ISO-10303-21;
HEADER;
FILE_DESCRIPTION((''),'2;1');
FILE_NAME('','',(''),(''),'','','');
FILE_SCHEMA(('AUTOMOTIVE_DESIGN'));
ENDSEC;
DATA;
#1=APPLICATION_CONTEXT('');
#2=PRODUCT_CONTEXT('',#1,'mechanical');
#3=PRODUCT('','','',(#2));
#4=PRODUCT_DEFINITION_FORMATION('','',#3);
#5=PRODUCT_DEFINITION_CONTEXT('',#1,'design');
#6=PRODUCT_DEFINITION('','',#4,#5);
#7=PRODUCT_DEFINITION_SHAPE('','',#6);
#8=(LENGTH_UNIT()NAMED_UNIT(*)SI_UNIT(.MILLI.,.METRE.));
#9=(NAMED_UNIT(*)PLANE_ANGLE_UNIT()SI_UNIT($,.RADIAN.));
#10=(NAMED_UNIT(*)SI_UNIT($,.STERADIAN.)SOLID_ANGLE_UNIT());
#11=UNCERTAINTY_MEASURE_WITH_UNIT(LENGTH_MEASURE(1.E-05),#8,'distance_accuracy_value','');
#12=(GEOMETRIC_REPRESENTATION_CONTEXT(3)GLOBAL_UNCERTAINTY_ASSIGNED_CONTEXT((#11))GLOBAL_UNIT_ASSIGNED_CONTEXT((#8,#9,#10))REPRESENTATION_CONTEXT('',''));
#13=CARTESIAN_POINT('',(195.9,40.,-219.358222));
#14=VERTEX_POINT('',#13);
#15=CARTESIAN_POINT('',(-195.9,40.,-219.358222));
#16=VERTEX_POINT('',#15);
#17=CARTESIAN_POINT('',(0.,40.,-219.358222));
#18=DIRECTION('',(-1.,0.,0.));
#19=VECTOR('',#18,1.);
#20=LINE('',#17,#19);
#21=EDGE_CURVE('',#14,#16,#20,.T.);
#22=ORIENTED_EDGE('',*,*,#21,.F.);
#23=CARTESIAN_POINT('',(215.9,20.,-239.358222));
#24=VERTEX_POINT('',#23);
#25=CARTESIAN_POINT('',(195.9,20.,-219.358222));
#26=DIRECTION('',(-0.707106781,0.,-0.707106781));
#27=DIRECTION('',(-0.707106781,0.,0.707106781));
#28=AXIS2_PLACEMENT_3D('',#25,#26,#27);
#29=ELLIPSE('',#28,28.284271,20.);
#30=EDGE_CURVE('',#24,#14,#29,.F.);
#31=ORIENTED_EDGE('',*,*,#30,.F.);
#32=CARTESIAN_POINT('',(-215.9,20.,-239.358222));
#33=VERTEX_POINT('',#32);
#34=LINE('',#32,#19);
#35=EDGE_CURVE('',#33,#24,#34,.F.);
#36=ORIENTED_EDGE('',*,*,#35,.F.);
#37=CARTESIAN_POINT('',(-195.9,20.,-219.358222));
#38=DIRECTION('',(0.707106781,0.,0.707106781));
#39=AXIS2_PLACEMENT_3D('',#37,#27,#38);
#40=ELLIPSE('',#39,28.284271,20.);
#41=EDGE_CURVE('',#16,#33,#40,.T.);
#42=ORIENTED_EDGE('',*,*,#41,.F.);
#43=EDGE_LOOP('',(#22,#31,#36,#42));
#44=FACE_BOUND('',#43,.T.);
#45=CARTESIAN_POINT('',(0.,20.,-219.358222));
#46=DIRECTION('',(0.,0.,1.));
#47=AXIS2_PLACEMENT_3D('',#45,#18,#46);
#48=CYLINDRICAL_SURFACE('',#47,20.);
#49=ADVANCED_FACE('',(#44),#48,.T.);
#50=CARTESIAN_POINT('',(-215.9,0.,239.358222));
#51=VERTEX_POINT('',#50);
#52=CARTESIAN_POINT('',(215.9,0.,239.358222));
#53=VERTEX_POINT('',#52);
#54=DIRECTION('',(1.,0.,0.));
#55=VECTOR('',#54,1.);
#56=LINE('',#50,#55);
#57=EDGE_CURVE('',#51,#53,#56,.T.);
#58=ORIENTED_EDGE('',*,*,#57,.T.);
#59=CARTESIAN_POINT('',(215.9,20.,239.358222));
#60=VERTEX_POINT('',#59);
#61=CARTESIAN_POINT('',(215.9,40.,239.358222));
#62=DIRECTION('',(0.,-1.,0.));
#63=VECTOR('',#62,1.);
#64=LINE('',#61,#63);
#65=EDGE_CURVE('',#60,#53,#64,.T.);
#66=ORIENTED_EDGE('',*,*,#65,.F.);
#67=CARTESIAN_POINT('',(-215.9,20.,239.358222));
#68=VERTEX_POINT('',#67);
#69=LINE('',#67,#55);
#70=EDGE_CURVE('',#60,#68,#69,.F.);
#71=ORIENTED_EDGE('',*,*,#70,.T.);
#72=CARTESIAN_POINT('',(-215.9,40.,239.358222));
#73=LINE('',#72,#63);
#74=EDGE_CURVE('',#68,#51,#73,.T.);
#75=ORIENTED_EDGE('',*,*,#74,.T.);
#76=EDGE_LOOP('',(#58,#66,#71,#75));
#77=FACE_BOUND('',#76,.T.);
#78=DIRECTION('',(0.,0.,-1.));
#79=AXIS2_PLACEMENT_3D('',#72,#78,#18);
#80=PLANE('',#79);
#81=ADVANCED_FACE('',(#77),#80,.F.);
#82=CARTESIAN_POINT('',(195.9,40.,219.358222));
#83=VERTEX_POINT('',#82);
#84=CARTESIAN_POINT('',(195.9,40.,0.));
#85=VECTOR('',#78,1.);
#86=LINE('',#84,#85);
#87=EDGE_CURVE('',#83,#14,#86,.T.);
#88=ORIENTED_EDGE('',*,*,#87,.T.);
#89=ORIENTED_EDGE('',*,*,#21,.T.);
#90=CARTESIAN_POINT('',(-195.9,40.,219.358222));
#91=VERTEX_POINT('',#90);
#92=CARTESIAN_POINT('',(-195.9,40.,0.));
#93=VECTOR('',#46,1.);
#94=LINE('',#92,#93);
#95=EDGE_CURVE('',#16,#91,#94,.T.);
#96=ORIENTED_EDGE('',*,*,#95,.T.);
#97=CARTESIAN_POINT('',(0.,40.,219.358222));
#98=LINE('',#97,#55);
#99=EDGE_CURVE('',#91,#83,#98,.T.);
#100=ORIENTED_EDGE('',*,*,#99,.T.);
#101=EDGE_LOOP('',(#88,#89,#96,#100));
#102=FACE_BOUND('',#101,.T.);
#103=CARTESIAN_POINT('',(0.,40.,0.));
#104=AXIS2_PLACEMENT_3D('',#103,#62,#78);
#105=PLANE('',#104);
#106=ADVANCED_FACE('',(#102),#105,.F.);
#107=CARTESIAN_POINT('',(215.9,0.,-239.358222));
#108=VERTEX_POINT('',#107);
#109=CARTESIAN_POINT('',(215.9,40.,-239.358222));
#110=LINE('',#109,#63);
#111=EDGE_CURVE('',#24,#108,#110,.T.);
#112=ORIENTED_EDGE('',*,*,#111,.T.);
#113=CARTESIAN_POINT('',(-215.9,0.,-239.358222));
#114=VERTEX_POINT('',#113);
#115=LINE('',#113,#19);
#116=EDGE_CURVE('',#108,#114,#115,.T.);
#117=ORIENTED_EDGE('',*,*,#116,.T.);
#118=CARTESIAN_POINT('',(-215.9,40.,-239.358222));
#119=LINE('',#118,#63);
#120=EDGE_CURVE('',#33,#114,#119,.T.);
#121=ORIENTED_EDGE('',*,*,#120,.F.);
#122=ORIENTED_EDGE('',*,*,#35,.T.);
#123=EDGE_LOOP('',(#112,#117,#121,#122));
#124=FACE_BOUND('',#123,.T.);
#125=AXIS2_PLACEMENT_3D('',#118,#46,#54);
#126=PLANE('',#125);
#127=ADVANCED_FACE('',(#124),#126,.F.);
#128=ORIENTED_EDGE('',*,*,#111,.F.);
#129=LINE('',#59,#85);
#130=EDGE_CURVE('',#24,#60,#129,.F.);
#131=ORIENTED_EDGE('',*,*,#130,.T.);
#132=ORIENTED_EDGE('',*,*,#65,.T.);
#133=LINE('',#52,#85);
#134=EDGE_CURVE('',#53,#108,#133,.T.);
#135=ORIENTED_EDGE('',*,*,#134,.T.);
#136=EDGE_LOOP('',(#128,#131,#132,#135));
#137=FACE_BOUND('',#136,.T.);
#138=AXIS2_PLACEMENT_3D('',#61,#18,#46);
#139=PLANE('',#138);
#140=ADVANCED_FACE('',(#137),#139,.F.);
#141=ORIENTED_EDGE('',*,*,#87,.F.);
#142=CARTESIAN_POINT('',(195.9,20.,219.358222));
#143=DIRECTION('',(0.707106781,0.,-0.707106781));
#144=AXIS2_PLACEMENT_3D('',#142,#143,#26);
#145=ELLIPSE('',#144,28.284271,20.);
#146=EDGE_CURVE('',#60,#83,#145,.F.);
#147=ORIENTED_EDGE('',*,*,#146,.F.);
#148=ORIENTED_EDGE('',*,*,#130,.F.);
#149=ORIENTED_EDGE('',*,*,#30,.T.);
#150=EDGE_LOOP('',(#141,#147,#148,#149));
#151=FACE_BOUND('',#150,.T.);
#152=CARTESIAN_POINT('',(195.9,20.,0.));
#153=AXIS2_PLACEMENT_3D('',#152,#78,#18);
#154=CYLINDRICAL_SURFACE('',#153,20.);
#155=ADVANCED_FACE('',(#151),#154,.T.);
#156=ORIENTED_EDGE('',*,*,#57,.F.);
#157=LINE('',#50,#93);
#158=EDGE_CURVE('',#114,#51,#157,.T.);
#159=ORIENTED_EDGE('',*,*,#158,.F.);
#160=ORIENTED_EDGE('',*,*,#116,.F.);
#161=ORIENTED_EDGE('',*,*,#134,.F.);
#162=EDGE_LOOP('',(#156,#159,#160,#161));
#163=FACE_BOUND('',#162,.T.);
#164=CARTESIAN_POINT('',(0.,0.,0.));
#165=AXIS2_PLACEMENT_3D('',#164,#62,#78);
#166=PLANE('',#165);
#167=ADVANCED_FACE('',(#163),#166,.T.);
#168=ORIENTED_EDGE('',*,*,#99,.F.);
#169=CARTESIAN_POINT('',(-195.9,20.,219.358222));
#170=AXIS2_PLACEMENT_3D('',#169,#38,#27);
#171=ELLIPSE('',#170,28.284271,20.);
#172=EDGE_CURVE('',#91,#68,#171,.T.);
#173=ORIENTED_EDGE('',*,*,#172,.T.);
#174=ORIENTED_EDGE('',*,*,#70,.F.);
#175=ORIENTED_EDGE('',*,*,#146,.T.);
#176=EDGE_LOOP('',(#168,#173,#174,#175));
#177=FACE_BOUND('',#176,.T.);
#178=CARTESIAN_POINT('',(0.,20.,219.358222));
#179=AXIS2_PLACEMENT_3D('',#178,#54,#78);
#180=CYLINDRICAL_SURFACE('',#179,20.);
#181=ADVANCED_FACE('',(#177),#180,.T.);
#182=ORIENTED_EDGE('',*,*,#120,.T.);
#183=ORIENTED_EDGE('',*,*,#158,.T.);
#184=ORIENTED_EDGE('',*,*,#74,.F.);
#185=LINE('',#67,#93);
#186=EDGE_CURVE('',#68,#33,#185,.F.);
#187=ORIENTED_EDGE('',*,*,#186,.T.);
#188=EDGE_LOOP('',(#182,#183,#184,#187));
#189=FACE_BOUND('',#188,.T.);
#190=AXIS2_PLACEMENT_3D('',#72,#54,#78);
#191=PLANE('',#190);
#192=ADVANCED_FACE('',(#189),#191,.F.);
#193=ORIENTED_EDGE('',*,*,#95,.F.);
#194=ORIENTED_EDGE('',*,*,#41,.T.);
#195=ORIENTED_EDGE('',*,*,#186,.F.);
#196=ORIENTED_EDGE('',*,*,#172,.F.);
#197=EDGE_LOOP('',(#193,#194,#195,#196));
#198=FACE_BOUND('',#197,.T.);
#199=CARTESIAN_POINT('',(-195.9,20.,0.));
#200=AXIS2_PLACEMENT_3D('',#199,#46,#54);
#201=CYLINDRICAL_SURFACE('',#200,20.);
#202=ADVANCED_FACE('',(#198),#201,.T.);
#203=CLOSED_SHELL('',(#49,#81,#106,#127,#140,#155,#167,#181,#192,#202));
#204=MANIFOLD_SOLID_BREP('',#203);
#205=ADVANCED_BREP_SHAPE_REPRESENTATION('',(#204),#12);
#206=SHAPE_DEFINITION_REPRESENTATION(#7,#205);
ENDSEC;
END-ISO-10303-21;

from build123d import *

# Parameters (mm, degrees)
SKETCH1_W           = 431.8
SKETCH1_H           = 478.71644455
BOSS_EXTRUDE1_DEPTH = 40
FILLET1_START       = -215.9
FILLET1_DEPTH       = 431.8
FILLET1_START_2     = -240
FILLET1_2_DEPTH     = 480


with BuildPart() as part:
    # Sketch1 → Boss-Extrude1 (new body)
    with BuildSketch(Plane(origin=(0, 0, 0), x_dir=(1, 0, 0), z_dir=(0, 1, 0))):
        Rectangle(SKETCH1_W, SKETCH1_H)
    extrude(amount=BOSS_EXTRUDE1_DEPTH)

    # Fillet1: read off the stored shape, not the designer's step
    # Fillet1 outline → Fillet1 (cut)
    with BuildSketch(Plane.YZ.offset(FILLET1_START)):
        with BuildLine():
            Line((40, -239.358222275), (40, -219.358222275))
            ThreePointArc((40, -219.358222275), (34.142135624, -233.500357899), (20, -239.358222275))
            Line((20, -239.358222275), (40, -239.358222275))
        make_face()
        with BuildLine():
            ThreePointArc((20, 239.358222275), (34.142135624, 233.500357899), (40, 219.358222275))
            Line((40, 219.358222275), (40, 239.358222275))
            Line((40, 239.358222275), (20, 239.358222275))
        make_face()
    extrude(amount=FILLET1_DEPTH, mode=Mode.SUBTRACT)

    # Fillet1 2 outline → Fillet1 2 (cut)
    with BuildSketch(Plane.XY.offset(FILLET1_START_2)):
        with BuildLine():
            Line((215.9, 40), (195.9, 40))
            ThreePointArc((195.9, 40), (210.042135624, 34.142135624), (215.9, 20))
            Line((215.9, 20), (215.9, 40))
        make_face()
        with BuildLine():
            ThreePointArc((-215.9, 20), (-210.042135624, 34.142135624), (-195.9, 40))
            Line((-195.9, 40), (-215.9, 40))
            Line((-215.9, 40), (-215.9, 20))
        make_face()
    extrude(amount=FILLET1_2_DEPTH, mode=Mode.SUBTRACT)


solid = part.part
